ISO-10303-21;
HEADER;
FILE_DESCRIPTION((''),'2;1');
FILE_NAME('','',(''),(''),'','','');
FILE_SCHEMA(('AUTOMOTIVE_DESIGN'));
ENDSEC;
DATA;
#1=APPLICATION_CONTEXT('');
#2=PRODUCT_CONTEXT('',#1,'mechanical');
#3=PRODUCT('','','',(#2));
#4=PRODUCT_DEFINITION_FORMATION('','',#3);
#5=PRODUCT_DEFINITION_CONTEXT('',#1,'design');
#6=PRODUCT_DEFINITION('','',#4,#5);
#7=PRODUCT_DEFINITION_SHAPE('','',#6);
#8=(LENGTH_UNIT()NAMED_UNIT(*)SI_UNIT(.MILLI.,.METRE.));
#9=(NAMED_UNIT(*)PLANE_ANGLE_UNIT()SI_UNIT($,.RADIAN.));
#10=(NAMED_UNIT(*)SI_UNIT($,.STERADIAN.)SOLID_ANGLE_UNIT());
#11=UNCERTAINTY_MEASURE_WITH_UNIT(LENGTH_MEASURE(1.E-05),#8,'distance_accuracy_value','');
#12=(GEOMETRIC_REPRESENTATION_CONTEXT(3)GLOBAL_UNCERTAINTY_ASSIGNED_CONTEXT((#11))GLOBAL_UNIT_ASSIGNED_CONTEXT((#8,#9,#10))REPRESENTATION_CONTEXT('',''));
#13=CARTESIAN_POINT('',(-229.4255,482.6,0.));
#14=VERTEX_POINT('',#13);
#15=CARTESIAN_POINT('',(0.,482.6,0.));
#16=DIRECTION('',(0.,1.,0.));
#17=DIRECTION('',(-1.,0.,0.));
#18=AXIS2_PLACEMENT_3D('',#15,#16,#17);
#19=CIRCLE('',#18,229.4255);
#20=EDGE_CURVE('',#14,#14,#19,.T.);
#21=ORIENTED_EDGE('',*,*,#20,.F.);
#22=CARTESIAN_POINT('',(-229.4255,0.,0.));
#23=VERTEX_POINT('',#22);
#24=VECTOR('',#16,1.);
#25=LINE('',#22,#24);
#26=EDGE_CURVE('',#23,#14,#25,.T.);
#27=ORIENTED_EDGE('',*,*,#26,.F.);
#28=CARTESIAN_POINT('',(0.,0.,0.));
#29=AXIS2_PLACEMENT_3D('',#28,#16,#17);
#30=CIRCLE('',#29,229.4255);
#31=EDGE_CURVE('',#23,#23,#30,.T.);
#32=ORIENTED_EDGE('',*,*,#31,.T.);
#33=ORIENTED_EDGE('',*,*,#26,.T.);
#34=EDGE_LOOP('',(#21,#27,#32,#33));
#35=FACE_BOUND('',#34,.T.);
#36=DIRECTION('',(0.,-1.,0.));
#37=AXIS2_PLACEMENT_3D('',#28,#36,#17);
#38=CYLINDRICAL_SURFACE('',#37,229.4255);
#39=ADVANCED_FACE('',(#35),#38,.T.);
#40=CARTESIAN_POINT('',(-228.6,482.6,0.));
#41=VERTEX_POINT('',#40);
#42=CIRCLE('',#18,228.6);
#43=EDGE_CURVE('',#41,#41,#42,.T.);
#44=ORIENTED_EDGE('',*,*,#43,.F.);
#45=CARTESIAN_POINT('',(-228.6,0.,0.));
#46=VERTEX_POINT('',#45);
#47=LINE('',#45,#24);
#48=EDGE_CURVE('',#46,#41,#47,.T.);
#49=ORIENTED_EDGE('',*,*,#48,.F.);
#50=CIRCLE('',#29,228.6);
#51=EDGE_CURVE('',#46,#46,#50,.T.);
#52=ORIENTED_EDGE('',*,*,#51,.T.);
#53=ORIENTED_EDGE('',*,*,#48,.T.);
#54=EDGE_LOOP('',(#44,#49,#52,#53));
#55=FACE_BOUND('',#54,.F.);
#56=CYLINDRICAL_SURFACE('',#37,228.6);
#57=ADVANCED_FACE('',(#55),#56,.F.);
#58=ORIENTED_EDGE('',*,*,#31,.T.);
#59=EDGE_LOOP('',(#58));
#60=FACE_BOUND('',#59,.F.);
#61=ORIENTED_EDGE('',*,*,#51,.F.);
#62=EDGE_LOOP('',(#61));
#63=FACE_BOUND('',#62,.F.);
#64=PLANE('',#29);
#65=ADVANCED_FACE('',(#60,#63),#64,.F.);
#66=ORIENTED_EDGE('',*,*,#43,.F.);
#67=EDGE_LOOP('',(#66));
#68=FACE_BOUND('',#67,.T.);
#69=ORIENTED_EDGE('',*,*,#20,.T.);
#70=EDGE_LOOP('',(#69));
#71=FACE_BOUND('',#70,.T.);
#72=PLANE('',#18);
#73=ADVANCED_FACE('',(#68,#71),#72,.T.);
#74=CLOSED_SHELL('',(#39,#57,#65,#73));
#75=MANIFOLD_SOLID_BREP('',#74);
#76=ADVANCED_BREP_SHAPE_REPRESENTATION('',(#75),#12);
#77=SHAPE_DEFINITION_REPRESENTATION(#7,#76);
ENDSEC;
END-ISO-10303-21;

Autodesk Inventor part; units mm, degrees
ref_plane "YZ Plane" through (0, 0, 0) normal (1, 0, 0) x (0, 1, 0)
ref_plane "XZ Plane" through (0, 0, 0) normal (0, 1, 0) x (-1, 0, 0)
ref_plane "XY Plane" through (0, 0, 0) normal (0, 0, 1) x (1, 0, 0)
sketch "Sketch1" plane through (0, 0, 0) normal (0, 1, 0) x (-1, 0, 0)
  circle A0 centre (0, 0) radius 228.6
  circle A1 centre (0, 0) radius 229.4255
  dimension "d0" = 457.2
  dimension "d1" = 458.851
extrude "Extrusion1" add sketch "Sketch1" along normal blind 482.6
properties part number "55K shield sheet" material "Aluminum 6061"
